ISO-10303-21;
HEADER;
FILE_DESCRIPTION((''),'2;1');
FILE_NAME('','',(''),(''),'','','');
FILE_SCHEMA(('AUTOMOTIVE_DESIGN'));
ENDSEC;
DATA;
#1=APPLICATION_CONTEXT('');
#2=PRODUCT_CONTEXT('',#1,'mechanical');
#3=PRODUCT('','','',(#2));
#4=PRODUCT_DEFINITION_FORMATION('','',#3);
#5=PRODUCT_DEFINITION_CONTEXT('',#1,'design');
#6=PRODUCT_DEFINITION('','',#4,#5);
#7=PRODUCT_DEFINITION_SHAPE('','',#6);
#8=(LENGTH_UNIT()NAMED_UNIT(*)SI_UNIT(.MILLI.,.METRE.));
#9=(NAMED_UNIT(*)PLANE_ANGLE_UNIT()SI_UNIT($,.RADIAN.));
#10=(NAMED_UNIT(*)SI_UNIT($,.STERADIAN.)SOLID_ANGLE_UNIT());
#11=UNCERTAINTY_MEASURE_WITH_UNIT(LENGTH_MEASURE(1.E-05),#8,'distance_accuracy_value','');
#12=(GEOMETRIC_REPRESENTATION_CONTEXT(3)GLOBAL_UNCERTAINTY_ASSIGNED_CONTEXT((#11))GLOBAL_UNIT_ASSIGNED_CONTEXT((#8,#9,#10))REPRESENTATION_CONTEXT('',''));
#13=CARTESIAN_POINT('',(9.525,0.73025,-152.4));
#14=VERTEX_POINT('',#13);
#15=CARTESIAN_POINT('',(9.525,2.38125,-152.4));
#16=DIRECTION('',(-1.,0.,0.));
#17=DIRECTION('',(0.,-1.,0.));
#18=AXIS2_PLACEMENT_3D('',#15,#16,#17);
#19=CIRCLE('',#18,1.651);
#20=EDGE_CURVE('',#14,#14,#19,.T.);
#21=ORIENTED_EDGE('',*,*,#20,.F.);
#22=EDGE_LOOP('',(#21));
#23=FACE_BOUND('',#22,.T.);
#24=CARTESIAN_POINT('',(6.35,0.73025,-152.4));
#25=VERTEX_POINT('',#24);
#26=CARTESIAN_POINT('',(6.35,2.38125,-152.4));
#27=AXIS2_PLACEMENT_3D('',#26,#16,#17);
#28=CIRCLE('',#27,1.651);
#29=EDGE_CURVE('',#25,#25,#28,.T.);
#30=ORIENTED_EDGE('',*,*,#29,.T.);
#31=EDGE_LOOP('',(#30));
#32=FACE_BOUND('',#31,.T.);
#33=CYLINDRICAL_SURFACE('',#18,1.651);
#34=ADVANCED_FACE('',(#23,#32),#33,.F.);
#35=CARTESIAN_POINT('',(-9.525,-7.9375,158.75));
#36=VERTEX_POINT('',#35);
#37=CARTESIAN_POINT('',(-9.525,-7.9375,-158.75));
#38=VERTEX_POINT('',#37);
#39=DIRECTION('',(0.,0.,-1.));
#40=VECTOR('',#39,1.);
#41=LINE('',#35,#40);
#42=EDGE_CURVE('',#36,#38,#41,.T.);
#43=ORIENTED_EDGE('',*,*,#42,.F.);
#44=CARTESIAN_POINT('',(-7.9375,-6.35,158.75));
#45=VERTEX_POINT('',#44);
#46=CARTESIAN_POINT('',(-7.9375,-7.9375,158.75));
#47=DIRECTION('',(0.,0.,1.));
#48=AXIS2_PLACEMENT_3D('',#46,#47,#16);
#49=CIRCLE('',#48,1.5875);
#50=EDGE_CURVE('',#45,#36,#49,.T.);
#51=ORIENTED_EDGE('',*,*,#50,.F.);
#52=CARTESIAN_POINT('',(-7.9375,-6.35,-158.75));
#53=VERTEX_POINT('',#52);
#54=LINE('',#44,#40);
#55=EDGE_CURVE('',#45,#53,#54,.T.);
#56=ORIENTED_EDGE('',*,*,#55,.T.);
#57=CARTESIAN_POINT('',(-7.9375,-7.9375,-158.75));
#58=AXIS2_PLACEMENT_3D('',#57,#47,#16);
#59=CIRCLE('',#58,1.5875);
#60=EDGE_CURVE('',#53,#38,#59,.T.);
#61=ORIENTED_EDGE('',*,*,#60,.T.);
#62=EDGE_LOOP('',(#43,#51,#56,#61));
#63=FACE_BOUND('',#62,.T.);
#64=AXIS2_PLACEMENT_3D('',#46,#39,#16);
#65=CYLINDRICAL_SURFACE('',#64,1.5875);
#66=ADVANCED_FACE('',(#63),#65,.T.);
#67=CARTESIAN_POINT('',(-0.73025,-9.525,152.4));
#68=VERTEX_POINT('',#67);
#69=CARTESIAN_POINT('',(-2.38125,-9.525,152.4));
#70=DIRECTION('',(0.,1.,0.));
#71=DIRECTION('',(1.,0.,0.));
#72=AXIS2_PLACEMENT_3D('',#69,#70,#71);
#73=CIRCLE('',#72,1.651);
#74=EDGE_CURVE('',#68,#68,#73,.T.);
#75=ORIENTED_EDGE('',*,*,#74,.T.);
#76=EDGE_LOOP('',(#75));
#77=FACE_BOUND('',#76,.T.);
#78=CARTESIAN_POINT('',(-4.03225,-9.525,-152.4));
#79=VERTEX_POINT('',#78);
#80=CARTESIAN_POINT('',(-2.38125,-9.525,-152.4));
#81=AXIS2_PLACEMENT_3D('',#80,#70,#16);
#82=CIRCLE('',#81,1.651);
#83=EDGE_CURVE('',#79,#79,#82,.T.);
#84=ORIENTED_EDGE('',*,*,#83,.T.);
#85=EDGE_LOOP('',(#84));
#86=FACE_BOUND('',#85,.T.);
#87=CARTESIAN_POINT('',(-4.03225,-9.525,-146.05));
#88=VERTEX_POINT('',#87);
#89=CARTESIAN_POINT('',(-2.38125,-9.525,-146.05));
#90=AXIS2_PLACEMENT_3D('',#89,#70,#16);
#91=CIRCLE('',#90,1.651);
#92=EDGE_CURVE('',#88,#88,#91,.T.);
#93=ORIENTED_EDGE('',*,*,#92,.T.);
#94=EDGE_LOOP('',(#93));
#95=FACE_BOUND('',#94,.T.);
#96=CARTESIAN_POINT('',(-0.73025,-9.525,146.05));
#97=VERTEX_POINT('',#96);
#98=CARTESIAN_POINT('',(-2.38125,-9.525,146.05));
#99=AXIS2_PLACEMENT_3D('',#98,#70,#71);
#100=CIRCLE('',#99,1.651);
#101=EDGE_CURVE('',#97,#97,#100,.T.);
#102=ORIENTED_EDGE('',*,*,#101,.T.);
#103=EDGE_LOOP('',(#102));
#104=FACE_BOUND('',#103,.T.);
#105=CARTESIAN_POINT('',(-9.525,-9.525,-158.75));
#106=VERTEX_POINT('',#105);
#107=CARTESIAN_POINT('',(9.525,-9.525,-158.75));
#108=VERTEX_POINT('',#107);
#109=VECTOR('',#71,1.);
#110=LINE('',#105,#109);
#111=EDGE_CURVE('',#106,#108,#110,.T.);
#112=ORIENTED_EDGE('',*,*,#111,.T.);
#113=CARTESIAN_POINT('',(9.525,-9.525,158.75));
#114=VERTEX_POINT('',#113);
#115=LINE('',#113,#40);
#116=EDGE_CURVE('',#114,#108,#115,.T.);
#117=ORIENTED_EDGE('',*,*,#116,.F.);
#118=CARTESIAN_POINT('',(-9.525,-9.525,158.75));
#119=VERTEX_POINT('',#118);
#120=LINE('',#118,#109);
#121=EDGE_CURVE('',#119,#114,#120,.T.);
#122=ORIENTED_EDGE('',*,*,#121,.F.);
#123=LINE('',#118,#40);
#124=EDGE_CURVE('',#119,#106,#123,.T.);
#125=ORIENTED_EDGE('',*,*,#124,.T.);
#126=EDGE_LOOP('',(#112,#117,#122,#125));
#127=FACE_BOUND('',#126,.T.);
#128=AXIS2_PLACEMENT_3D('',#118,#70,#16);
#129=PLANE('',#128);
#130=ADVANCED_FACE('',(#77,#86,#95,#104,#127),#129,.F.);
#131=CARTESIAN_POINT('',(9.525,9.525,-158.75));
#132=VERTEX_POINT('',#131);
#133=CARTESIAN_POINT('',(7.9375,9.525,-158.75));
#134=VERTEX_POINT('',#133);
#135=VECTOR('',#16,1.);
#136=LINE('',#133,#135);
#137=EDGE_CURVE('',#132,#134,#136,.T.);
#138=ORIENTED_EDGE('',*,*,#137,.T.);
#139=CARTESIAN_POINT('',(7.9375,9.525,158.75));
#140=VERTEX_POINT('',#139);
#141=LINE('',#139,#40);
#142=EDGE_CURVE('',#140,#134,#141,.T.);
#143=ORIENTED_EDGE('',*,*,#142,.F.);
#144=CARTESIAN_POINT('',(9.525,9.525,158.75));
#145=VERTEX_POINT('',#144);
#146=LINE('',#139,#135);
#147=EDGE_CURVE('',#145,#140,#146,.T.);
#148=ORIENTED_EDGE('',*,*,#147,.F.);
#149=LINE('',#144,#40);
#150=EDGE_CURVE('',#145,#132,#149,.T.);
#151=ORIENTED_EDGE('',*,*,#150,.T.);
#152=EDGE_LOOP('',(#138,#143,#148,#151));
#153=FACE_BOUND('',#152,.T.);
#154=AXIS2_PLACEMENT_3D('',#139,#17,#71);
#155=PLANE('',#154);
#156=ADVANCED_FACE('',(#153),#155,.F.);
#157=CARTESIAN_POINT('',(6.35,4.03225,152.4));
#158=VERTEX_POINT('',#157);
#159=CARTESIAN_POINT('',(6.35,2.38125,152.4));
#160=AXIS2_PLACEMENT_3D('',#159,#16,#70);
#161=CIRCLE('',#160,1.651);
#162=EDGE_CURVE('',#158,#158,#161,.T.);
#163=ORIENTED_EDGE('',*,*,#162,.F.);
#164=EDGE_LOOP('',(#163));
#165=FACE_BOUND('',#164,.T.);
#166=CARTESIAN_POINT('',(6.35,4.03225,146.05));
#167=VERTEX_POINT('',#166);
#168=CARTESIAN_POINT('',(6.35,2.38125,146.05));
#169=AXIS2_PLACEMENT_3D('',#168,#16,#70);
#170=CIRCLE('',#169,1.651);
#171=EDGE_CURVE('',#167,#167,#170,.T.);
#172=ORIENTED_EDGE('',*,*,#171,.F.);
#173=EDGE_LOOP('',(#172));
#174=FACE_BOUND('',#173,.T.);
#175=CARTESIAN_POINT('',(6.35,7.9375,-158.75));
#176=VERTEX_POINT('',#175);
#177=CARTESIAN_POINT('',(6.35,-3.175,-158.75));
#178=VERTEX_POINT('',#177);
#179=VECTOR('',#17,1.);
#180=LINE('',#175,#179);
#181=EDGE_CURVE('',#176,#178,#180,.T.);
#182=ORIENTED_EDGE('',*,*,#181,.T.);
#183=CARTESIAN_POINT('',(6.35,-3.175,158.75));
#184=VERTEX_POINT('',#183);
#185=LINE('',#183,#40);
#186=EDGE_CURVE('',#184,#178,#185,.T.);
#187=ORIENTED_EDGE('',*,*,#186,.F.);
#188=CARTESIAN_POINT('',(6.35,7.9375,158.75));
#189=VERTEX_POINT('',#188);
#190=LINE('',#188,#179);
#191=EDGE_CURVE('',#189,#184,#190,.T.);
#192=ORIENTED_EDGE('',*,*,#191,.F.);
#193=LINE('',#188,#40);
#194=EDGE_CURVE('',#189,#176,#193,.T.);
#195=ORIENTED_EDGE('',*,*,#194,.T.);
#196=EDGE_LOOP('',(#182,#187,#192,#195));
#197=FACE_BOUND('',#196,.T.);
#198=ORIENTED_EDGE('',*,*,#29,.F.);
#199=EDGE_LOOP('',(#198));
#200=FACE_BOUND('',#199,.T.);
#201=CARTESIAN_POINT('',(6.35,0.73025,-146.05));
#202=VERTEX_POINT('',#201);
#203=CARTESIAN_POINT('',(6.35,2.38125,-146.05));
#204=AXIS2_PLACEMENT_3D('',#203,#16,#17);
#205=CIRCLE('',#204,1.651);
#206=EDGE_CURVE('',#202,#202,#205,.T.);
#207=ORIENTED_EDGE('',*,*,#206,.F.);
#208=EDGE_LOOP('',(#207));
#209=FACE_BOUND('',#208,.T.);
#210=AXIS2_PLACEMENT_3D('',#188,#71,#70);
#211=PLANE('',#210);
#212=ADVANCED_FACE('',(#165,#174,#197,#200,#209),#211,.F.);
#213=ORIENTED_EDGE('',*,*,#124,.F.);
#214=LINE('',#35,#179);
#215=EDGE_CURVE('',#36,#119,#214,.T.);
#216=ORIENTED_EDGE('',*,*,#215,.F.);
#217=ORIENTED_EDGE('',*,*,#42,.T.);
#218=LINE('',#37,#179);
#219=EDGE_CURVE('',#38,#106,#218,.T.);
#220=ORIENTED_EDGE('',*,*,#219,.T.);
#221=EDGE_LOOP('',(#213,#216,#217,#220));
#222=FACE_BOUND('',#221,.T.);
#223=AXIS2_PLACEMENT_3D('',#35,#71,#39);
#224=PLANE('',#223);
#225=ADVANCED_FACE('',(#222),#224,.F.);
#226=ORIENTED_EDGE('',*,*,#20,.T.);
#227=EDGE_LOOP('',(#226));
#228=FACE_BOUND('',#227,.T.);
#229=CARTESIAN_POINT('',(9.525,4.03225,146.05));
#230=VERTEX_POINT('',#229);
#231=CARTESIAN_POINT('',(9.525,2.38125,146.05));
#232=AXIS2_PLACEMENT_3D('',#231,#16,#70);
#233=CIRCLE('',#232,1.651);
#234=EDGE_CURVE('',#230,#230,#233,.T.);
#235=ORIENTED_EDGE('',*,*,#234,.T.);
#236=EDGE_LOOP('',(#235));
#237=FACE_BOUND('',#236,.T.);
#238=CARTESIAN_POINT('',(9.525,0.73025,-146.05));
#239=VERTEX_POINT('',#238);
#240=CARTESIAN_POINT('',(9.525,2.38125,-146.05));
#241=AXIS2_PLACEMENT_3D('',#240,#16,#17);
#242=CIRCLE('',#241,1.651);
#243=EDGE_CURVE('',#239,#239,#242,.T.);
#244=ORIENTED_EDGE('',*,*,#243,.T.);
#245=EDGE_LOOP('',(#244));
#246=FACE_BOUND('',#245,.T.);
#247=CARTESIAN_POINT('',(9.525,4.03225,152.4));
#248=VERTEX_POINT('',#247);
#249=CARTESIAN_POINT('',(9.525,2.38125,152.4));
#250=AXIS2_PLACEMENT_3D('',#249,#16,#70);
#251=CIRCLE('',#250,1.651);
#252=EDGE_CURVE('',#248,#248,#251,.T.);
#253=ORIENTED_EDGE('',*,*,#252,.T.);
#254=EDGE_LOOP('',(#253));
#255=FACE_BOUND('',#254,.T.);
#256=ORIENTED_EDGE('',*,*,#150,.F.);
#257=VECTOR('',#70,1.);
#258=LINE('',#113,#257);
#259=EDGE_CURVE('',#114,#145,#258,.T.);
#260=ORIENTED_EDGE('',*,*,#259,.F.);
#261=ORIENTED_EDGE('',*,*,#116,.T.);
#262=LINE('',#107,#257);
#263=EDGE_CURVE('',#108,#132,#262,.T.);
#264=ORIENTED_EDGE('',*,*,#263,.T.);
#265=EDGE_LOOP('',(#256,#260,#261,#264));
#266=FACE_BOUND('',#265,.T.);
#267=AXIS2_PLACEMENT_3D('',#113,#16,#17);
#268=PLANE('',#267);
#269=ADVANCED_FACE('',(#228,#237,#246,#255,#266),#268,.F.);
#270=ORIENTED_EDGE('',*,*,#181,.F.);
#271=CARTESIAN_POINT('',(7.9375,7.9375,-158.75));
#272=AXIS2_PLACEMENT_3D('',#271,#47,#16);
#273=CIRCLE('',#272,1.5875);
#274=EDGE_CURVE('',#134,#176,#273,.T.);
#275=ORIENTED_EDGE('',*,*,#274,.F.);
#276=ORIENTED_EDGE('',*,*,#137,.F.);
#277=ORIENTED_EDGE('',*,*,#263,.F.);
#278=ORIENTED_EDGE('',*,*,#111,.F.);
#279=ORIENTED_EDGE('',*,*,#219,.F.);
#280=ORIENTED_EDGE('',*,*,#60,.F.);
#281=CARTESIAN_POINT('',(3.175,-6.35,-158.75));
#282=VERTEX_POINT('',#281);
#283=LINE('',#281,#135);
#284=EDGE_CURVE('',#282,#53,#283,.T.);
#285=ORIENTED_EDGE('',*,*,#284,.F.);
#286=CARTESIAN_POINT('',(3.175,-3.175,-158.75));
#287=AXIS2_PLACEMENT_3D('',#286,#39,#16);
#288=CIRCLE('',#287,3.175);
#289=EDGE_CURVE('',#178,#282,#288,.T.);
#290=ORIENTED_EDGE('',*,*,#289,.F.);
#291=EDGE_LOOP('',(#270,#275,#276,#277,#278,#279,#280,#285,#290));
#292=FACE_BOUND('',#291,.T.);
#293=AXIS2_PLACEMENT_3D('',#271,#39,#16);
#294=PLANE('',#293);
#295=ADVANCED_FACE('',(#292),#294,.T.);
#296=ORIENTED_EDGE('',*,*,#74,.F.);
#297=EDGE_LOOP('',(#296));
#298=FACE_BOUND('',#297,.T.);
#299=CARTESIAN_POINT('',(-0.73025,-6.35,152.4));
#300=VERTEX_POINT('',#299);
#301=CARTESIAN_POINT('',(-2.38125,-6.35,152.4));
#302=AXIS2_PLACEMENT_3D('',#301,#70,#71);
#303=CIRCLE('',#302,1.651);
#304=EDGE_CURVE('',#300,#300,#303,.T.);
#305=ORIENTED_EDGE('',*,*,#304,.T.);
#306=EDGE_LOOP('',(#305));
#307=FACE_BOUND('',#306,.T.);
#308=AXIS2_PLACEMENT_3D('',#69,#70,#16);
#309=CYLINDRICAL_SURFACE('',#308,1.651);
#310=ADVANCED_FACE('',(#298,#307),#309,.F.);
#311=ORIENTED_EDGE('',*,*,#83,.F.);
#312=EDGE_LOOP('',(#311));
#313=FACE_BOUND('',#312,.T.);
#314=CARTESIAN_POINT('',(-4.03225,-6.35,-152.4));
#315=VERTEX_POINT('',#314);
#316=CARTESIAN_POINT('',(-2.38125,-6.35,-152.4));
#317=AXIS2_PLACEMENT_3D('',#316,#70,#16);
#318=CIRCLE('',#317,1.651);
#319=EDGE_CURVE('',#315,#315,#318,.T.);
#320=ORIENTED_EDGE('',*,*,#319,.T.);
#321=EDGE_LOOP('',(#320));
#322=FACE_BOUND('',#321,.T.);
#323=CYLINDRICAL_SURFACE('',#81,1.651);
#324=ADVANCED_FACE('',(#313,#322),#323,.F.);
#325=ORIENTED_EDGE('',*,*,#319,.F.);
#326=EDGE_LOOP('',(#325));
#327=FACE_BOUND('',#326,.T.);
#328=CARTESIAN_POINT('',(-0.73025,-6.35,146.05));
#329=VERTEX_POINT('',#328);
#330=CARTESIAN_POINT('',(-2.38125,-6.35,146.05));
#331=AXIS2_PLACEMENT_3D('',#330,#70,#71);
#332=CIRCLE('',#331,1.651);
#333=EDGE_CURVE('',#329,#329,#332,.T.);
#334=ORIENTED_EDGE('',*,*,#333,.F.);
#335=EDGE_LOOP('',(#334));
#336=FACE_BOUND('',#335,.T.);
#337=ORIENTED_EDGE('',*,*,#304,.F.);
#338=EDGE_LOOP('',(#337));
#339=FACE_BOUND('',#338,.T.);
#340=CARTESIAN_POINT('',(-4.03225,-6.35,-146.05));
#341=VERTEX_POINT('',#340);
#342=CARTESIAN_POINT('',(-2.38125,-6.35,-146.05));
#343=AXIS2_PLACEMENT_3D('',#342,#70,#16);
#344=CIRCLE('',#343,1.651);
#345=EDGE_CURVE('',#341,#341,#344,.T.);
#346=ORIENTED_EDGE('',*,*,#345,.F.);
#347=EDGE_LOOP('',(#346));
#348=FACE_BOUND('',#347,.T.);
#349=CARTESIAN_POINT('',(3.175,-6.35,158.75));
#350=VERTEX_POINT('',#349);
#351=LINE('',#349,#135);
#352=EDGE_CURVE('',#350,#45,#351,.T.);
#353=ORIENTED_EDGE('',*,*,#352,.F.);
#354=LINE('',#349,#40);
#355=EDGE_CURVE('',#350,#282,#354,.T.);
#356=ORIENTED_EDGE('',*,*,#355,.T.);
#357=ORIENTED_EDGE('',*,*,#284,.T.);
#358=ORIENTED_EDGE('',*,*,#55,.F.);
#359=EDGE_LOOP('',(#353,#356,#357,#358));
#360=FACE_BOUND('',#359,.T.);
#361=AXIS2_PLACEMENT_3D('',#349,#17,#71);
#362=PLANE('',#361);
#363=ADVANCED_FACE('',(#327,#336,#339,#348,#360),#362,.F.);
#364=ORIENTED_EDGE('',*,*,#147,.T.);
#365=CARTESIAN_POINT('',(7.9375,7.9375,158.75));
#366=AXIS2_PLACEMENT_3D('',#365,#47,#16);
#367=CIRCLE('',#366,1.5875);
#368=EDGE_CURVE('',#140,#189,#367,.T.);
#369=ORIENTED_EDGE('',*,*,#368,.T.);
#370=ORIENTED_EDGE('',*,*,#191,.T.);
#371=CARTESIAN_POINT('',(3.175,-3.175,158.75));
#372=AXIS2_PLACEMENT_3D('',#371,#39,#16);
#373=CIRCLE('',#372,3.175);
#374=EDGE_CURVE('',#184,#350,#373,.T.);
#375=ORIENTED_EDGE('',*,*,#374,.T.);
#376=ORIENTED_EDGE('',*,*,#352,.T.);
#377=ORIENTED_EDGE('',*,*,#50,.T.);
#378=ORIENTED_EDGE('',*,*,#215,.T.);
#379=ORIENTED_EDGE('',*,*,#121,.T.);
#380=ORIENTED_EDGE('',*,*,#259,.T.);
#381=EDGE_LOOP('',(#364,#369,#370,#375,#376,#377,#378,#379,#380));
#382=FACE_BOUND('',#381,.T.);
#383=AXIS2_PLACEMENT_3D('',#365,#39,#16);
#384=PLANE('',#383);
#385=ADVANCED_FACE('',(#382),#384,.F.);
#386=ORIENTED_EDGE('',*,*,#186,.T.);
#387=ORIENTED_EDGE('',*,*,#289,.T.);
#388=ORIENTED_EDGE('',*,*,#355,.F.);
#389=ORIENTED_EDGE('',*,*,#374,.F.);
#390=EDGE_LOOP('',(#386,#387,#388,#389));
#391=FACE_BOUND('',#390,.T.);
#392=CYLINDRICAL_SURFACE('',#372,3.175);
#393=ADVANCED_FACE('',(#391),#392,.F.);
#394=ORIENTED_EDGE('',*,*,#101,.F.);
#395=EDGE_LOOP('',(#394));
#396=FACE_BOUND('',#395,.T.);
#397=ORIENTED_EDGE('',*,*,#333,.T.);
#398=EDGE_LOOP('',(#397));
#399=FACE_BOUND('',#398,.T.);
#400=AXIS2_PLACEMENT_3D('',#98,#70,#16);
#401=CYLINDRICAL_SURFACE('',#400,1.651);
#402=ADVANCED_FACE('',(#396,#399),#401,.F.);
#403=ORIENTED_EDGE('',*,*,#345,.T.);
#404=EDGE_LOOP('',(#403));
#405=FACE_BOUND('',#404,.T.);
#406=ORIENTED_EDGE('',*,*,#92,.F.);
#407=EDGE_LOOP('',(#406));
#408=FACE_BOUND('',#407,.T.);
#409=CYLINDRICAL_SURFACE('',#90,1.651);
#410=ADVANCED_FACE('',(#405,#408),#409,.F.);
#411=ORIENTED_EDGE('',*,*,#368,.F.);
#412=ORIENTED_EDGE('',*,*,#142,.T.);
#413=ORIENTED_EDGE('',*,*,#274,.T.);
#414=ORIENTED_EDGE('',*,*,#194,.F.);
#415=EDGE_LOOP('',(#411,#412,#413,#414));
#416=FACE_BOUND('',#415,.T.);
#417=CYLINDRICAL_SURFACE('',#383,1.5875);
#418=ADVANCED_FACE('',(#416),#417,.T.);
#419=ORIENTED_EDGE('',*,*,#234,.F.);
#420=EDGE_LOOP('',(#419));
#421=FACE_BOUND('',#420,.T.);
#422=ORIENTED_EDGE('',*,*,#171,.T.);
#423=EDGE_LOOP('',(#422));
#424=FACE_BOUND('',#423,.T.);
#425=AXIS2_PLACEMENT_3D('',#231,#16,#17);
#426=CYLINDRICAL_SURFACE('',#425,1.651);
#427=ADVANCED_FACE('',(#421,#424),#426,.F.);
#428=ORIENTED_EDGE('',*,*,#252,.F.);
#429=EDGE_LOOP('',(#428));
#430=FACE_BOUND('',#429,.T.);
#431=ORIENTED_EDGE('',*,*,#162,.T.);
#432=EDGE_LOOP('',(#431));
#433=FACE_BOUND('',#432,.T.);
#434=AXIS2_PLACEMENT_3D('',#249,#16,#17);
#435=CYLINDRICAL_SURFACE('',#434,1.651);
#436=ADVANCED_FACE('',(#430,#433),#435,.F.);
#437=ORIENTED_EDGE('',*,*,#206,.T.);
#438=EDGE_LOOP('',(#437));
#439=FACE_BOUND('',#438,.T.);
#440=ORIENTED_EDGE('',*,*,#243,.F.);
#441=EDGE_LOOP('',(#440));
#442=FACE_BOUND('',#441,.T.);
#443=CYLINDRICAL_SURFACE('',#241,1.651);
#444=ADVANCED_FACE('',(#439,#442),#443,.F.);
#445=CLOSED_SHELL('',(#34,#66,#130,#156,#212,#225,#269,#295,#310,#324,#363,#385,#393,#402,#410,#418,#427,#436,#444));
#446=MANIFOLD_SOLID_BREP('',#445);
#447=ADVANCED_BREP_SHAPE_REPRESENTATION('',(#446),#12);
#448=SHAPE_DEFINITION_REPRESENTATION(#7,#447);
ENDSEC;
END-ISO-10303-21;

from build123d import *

# Parameters (mm, degrees)
BOSS_EXTRUDE1_DEPTH = 158.75
SKETCH3_R           = 1.651
CUT_EXTRUDE1_DEPTH  = 160.825854448
SKETCH4_R           = 1.651
CUT_EXTRUDE2_DEPTH  = 160.825854448


with BuildPart() as part:
    # Sketch2 → Boss-Extrude1 (new, symmetric)
    with BuildSketch(Plane.XY):
        with BuildLine():
            Line((-9.525, -9.525), (9.525, -9.525))
            Line((9.525, -9.525), (9.525, 9.525))
            Line((9.525, 9.525), (7.9375, 9.525))
            ThreePointArc((7.9375, 9.525), (6.814967985, 9.060032015), (6.35, 7.9375))
            Line((6.35, 7.9375), (6.35, -3.175))
            ThreePointArc((6.35, -3.175), (5.42006403, -5.42006403), (3.175, -6.35))
            Line((3.175, -6.35), (-7.9375, -6.35))
            ThreePointArc((-7.9375, -6.35), (-9.060032015, -6.814967985), (-9.525, -7.9375))
            Line((-9.525, -7.9375), (-9.525, -9.525))
        make_face()
    extrude(amount=BOSS_EXTRUDE1_DEPTH, both=True)

    # Sketch3 → Cut-Extrude1 (cut, through all)
    with BuildSketch(Plane(origin=(0, -6.35, 0), x_dir=(1, 0, 0), z_dir=(0, 1, 0))):
        with Locations((-2.38125, 152.4)):
            Circle(SKETCH3_R)
        with Locations((-2.38125, 146.05)):
            Circle(SKETCH3_R)
        with Locations((-2.38125, -146.05)):
            Circle(SKETCH3_R)
        with Locations((-2.38125, -152.4)):
            Circle(SKETCH3_R)
    extrude(amount=-CUT_EXTRUDE1_DEPTH, mode=Mode.SUBTRACT)

    # Sketch4 → Cut-Extrude2 (cut, through all)
    with BuildSketch(Plane.ZY.offset(-6.35)):
        with Locations((-152.4, 2.38125)):
            Circle(SKETCH4_R)
        with Locations((-146.05, 2.38125)):
            Circle(SKETCH4_R)
        with Locations((146.05, 2.38125)):
            Circle(SKETCH4_R)
        with Locations((152.4, 2.38125)):
            Circle(SKETCH4_R)
    extrude(amount=-CUT_EXTRUDE2_DEPTH, mode=Mode.SUBTRACT)


solid = part.part
